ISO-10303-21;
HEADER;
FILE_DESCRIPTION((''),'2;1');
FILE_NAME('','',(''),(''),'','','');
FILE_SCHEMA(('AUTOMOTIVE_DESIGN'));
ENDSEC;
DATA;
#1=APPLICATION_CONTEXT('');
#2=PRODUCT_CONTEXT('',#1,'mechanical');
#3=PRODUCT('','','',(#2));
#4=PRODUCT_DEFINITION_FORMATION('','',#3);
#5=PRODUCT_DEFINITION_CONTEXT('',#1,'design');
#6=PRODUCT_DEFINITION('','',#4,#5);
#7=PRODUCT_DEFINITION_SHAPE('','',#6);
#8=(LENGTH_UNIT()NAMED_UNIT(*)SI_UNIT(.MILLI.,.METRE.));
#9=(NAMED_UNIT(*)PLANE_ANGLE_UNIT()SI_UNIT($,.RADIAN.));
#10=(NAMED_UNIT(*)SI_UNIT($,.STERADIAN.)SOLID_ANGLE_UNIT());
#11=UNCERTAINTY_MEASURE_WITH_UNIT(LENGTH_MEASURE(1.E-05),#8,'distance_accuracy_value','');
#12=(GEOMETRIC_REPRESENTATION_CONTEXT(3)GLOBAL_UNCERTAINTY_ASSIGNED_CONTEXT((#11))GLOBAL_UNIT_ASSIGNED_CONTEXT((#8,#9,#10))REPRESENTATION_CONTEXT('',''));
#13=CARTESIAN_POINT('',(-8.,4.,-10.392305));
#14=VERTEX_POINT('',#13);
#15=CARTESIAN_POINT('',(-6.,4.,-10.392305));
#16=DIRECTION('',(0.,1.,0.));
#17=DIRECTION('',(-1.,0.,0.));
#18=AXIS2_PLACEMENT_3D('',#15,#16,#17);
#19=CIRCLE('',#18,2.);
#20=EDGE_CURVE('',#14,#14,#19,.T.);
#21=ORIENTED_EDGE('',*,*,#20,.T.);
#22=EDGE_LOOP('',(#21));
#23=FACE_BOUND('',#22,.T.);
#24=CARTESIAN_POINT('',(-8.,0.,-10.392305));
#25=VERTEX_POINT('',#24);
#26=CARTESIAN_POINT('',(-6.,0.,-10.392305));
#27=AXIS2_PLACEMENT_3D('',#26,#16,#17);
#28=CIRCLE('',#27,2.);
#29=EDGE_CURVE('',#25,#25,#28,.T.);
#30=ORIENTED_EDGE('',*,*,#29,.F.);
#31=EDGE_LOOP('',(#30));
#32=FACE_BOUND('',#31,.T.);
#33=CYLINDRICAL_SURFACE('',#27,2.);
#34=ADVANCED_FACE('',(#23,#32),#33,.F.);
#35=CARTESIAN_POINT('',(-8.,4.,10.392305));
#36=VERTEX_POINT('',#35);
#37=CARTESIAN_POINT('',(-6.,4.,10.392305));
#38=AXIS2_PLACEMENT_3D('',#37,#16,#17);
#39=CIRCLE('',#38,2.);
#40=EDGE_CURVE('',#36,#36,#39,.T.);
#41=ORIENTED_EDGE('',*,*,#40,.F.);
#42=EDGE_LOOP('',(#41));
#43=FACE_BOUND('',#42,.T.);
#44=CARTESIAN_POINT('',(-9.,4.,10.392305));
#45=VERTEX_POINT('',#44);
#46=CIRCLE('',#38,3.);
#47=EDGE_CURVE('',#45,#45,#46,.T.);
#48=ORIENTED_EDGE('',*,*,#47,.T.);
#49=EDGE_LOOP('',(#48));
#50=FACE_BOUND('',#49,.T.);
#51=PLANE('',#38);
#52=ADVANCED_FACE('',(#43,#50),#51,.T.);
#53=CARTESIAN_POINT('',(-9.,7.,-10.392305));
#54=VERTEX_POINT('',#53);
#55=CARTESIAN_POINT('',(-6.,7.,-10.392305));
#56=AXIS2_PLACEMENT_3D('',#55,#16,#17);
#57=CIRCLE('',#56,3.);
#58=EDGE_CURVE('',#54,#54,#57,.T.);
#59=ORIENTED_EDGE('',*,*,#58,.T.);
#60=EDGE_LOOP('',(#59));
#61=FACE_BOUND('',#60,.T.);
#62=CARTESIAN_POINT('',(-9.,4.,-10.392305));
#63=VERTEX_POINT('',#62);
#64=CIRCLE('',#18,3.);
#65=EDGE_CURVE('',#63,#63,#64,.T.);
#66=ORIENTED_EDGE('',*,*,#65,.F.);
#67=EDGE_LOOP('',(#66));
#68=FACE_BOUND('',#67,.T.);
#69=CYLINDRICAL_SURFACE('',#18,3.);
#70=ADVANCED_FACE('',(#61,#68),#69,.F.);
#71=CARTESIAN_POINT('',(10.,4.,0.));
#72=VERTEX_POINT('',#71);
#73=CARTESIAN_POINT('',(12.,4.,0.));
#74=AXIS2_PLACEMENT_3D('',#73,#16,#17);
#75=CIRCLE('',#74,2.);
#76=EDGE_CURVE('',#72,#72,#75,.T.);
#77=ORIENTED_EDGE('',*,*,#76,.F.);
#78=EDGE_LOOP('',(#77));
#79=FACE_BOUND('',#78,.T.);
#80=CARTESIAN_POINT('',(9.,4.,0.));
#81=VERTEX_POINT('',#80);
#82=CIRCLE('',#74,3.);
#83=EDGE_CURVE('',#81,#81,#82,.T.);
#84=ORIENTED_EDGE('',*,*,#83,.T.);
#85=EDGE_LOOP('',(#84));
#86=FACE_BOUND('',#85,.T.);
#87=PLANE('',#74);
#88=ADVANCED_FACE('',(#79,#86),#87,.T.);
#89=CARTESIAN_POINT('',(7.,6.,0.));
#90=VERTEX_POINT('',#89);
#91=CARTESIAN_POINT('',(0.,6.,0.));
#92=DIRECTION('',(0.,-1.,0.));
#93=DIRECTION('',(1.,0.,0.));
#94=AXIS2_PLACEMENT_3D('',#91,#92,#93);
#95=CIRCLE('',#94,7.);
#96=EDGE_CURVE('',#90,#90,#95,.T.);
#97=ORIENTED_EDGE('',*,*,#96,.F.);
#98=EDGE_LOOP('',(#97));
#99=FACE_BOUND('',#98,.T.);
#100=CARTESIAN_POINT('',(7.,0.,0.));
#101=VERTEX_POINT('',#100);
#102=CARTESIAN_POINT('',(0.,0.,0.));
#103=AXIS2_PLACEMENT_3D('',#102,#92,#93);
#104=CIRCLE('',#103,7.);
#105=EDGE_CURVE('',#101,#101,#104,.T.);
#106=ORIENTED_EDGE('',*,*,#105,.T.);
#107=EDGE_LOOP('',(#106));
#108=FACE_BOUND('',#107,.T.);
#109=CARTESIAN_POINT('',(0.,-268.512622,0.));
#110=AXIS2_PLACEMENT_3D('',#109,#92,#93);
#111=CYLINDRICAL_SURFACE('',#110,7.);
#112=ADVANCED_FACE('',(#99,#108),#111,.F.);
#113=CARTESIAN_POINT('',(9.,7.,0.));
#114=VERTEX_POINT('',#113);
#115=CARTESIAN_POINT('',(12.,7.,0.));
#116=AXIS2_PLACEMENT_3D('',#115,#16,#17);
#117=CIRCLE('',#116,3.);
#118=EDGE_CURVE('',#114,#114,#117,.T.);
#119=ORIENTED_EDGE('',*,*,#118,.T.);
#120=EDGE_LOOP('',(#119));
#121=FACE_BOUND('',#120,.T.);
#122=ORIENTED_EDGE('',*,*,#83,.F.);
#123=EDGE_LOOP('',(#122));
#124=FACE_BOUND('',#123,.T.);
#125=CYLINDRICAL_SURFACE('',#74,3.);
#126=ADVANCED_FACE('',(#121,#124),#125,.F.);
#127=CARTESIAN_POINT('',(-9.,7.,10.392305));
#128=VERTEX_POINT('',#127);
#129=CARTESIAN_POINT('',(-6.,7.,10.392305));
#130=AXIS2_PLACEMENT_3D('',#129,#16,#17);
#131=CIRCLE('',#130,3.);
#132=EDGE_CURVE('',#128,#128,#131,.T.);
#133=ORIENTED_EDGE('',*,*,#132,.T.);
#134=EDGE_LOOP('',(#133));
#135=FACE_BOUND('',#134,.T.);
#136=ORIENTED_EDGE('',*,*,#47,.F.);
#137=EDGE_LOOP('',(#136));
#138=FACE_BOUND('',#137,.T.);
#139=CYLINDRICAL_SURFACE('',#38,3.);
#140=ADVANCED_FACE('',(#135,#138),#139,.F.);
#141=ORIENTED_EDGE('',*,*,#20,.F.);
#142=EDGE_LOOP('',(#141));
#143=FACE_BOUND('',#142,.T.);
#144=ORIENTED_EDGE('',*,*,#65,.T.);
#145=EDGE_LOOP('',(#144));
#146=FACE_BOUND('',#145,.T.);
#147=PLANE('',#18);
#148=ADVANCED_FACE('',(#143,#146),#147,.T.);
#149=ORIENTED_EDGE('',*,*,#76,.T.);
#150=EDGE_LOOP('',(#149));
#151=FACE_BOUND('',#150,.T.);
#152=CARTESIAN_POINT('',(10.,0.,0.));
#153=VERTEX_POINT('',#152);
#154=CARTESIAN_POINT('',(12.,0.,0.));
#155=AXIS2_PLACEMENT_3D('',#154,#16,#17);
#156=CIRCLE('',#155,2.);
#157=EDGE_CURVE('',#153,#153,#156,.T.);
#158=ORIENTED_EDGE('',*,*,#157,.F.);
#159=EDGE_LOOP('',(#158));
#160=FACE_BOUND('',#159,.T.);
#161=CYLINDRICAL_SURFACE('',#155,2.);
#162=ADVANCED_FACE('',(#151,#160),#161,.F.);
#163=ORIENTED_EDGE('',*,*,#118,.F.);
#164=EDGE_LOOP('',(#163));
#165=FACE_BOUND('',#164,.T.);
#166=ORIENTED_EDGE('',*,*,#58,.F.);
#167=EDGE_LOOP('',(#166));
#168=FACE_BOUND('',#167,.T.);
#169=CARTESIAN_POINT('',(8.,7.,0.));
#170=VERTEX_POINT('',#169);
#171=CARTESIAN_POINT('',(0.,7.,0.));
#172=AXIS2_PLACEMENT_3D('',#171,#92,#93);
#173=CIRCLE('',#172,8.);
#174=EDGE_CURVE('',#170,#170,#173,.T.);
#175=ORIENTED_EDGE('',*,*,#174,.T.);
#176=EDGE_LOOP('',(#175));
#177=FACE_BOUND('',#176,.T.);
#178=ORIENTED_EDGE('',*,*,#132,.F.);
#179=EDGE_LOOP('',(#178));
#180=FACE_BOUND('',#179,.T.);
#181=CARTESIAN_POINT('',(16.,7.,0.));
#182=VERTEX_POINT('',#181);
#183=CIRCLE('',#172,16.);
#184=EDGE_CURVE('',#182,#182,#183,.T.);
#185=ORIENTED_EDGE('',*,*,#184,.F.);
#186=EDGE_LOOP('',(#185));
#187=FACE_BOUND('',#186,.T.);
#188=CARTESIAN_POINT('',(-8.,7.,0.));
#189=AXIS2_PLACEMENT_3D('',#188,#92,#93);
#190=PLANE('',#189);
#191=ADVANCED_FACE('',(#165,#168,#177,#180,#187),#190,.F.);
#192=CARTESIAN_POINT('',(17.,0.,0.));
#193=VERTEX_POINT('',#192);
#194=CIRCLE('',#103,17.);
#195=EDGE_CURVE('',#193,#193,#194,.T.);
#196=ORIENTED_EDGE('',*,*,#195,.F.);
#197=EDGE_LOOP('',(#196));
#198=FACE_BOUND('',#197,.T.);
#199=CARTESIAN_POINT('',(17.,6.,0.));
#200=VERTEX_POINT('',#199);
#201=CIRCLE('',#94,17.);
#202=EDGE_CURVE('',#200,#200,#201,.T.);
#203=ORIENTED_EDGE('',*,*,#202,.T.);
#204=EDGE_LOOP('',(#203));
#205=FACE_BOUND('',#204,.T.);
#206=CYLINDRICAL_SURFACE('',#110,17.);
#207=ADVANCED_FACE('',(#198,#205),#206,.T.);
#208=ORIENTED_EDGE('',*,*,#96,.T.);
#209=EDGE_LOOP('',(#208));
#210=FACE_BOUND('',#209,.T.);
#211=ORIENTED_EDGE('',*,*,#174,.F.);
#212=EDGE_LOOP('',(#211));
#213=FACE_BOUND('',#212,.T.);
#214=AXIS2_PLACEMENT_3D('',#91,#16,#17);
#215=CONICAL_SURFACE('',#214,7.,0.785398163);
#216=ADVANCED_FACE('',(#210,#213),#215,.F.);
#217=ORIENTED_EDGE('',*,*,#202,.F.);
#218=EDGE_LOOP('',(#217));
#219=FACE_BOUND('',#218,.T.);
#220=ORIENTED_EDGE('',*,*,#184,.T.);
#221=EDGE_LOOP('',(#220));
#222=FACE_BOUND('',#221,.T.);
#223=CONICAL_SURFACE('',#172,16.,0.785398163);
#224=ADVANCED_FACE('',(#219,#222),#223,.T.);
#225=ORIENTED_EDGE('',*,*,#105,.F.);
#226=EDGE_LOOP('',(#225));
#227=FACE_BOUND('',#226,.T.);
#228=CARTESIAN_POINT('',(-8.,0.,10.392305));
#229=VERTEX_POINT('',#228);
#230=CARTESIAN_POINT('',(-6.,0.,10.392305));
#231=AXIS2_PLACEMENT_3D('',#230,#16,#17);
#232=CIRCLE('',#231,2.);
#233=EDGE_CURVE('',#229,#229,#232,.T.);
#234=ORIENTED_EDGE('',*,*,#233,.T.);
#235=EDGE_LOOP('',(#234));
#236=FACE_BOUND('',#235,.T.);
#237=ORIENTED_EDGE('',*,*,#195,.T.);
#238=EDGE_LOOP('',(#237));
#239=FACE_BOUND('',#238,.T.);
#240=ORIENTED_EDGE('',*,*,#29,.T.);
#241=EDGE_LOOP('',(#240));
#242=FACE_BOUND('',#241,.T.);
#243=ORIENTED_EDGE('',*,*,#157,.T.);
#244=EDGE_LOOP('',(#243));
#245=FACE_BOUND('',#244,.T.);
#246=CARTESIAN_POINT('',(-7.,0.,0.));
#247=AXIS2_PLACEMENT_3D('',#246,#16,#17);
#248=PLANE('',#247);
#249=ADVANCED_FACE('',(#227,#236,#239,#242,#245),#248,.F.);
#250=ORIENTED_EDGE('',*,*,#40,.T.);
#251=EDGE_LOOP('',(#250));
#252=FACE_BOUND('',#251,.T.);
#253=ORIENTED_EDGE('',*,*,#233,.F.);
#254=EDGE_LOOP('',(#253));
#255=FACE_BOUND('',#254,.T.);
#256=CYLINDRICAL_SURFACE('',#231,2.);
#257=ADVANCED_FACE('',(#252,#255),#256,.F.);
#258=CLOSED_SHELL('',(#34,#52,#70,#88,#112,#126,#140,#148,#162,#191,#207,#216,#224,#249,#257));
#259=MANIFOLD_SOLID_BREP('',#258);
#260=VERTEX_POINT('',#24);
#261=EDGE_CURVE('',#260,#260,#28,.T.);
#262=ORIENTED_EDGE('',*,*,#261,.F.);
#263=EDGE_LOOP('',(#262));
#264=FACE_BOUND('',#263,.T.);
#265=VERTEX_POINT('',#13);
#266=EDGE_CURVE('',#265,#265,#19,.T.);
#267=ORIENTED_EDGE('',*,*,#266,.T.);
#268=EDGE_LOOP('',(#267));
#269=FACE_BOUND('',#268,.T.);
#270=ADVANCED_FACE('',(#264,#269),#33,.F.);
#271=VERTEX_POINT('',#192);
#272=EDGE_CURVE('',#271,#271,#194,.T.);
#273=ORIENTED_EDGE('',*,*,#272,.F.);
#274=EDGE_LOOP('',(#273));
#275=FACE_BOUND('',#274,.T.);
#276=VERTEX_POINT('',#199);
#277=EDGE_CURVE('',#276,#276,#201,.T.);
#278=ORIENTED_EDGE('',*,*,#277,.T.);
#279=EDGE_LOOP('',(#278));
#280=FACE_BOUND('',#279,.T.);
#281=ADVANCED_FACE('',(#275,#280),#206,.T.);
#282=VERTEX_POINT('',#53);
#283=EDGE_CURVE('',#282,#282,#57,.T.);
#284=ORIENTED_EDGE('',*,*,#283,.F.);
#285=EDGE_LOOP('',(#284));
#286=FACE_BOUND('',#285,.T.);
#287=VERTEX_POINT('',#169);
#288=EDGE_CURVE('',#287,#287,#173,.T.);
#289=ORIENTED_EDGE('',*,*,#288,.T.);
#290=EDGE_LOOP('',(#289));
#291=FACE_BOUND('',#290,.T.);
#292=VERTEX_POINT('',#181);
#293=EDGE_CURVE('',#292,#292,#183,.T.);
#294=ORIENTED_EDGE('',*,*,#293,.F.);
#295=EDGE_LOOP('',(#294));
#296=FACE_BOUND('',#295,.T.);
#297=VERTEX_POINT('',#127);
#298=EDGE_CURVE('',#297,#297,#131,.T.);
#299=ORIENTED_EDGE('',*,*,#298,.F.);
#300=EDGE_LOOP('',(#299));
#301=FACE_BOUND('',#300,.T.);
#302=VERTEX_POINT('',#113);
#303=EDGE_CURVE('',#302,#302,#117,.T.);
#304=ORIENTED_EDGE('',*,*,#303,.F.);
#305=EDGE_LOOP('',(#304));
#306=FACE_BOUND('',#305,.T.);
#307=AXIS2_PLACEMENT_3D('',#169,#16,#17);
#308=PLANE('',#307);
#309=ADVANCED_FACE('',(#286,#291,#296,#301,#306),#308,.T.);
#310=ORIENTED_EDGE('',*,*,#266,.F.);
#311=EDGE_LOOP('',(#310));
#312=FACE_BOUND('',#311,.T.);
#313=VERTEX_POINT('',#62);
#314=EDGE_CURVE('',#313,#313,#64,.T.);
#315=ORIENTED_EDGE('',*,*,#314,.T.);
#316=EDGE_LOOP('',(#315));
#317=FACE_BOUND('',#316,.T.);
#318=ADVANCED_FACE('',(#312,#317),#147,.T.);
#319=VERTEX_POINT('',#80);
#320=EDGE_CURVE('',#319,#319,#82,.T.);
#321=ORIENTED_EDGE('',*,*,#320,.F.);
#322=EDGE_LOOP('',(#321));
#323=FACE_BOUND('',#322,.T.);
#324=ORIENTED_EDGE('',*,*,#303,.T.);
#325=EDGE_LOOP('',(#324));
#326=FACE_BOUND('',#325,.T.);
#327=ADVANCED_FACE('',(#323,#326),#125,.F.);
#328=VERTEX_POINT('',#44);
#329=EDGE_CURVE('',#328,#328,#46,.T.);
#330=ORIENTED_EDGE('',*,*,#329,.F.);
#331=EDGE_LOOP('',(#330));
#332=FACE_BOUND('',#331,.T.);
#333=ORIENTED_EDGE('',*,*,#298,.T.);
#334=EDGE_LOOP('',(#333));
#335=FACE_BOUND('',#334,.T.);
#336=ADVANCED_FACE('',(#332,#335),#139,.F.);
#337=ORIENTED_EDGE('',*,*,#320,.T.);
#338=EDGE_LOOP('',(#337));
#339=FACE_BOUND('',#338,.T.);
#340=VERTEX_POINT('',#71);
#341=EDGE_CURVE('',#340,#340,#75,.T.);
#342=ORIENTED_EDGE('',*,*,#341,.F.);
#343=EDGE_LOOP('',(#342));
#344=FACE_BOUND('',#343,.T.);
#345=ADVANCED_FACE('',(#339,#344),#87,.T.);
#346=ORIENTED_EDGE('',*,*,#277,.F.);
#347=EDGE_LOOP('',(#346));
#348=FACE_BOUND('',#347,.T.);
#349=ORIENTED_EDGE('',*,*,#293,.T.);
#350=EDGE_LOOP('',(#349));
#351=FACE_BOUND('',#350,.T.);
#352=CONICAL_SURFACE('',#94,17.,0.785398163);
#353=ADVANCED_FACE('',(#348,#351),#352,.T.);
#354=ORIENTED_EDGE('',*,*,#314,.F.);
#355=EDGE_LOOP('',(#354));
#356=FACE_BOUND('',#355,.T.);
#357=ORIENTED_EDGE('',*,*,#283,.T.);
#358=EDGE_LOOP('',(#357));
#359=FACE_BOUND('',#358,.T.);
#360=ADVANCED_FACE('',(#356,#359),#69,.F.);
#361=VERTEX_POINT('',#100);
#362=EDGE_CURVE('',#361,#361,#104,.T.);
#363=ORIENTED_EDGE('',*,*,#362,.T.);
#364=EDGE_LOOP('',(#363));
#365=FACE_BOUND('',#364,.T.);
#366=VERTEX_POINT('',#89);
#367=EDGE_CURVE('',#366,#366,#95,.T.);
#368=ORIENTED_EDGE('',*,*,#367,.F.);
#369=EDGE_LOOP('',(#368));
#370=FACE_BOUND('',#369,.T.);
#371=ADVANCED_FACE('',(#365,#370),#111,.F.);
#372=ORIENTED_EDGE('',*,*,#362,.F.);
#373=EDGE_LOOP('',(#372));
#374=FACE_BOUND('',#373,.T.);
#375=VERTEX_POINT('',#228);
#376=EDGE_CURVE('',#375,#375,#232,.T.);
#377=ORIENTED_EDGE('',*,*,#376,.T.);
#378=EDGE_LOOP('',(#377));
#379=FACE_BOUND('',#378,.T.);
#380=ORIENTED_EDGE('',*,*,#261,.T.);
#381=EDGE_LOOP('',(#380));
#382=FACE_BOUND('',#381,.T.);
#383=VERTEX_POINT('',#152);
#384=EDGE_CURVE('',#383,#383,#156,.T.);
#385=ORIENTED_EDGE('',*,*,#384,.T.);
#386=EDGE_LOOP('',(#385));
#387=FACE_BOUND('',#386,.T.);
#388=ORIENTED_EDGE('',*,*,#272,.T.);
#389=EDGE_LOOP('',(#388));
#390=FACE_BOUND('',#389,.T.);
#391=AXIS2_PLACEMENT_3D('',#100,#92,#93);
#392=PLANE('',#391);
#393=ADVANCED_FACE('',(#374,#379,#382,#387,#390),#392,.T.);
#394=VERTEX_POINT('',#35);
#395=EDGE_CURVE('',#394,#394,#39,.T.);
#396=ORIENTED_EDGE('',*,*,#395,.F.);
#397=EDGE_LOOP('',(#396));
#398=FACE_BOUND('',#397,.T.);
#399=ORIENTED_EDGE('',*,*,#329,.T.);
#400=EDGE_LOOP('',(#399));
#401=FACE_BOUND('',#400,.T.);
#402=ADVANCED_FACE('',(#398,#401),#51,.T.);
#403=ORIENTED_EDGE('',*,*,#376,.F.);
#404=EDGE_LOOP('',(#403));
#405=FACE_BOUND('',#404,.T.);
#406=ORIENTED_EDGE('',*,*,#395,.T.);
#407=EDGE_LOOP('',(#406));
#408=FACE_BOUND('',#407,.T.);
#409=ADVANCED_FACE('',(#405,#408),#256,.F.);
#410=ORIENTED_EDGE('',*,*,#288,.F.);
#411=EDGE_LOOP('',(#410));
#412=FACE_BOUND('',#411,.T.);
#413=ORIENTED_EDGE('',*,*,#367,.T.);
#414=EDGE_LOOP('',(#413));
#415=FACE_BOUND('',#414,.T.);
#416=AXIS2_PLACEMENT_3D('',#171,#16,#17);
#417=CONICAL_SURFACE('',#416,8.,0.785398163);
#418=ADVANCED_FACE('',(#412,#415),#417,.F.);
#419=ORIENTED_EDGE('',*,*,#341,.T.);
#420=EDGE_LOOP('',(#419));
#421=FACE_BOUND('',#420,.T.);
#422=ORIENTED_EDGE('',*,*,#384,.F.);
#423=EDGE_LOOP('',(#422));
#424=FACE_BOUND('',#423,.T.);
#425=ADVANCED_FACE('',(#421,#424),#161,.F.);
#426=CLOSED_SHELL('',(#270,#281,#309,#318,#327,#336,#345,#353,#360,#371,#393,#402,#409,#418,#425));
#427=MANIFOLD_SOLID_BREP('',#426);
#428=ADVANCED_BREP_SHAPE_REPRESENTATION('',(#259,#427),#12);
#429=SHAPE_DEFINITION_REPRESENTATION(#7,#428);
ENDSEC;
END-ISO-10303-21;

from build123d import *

# Parameters (mm, degrees)
SKETCH_2_R          = 3
SKETCH_2_R_2        = 2
CUT_EXTRUDE_1_DEPTH = 3
SKETCH_3_R          = 2
CUT_EXTRUDE_2_DEPTH = 26.039968051


# Read off the part's stored shape, not the designer's step: 旋转1
with BuildPart() as part:
    # 旋转1 outline → 旋转1 (revolve)
    with BuildSketch(Plane.XY):
        Polygon((7, 6), (7, 0), (17, 0), (17, 6), (16, 7), (8, 7), align=None)
    revolve(axis=Axis((0, 0, 0), (0, 1, 0)))


with BuildPart() as body_2:
    # Revolve 1 2 outline → Revolve 1 2 (revolve)
    with BuildSketch(Plane.XY):
        Polygon((8, 7), (7, 6), (7, 0), (17, 0), (17, 6), (16, 7), align=None)
    revolve(axis=Axis((0, 0, 0), (0, 1, 0)))


with BuildPart() as cut_extrude_1_tool:
    # 草图2 → 切除-拉伸1 (new body)
    # profile 1 of 3: a face of its own
    with BuildSketch(Plane(origin=(0, 7, 0), x_dir=(1, 0, 0), z_dir=(0, 1, 0))):
        with Locations(Location((12, 0, 0), (0, 0, 180))):
            Circle(SKETCH_2_R)
        with Locations(Location((12, 0, 0), (0, 0, 180))):
            Circle(SKETCH_2_R_2, mode=Mode.SUBTRACT)
    # profile 2 of 3: a face of its own
    with BuildSketch(Plane(origin=(0, 7, 0), x_dir=(1, 0, 0), z_dir=(0, 1, 0))):
        with Locations(Location((-6, -10.392304845, 0), (0, 0, 180))):
            Circle(SKETCH_2_R)
        with Locations(Location((-6, -10.392304845, 0), (0, 0, 180))):
            Circle(SKETCH_2_R_2, mode=Mode.SUBTRACT)
    # profile 3 of 3: a face of its own
    with BuildSketch(Plane(origin=(0, 7, 0), x_dir=(1, 0, 0), z_dir=(0, 1, 0))):
        with Locations(Location((-6, 10.392304845, 0), (0, 0, 180))):
            Circle(SKETCH_2_R)
        with Locations(Location((-6, 10.392304845, 0), (0, 0, 180))):
            Circle(SKETCH_2_R_2, mode=Mode.SUBTRACT)
    extrude(amount=-CUT_EXTRUDE_1_DEPTH)


with BuildPart() as part_1:
    add(part.part)

    # 切除-拉伸1: cut by cut_extrude_1_tool
    add(cut_extrude_1_tool.part, mode=Mode.SUBTRACT)


with BuildPart() as body_2_1:
    add(body_2.part)

    # 切除-拉伸1: cut by cut_extrude_1_tool
    add(cut_extrude_1_tool.part, mode=Mode.SUBTRACT)


with BuildPart() as cut_extrude_2_tool:
    # 草图3 → 切除-拉伸2 (new, through all)
    with BuildSketch(Plane(origin=(0, 7, 0), x_dir=(1, 0, 0), z_dir=(0, 1, 0))):
        with Locations(Location((-6, 10.392304845, 0), (0, 0, 180))):
            Circle(SKETCH_3_R)
        with Locations(Location((12, 0, 0), (0, 0, 180))):
            Circle(SKETCH_3_R)
        with Locations(Location((-6, -10.392304845, 0), (0, 0, 180))):
            Circle(SKETCH_3_R)
    extrude(amount=-CUT_EXTRUDE_2_DEPTH)


with BuildPart() as part_2:
    add(part_1.part)

    # 切除-拉伸2: cut by cut_extrude_2_tool
    add(cut_extrude_2_tool.part, mode=Mode.SUBTRACT)


with BuildPart() as body_2_2:
    add(body_2_1.part)

    # 切除-拉伸2: cut by cut_extrude_2_tool
    add(cut_extrude_2_tool.part, mode=Mode.SUBTRACT)


solid = Compound([part_2.part, body_2_2.part])
